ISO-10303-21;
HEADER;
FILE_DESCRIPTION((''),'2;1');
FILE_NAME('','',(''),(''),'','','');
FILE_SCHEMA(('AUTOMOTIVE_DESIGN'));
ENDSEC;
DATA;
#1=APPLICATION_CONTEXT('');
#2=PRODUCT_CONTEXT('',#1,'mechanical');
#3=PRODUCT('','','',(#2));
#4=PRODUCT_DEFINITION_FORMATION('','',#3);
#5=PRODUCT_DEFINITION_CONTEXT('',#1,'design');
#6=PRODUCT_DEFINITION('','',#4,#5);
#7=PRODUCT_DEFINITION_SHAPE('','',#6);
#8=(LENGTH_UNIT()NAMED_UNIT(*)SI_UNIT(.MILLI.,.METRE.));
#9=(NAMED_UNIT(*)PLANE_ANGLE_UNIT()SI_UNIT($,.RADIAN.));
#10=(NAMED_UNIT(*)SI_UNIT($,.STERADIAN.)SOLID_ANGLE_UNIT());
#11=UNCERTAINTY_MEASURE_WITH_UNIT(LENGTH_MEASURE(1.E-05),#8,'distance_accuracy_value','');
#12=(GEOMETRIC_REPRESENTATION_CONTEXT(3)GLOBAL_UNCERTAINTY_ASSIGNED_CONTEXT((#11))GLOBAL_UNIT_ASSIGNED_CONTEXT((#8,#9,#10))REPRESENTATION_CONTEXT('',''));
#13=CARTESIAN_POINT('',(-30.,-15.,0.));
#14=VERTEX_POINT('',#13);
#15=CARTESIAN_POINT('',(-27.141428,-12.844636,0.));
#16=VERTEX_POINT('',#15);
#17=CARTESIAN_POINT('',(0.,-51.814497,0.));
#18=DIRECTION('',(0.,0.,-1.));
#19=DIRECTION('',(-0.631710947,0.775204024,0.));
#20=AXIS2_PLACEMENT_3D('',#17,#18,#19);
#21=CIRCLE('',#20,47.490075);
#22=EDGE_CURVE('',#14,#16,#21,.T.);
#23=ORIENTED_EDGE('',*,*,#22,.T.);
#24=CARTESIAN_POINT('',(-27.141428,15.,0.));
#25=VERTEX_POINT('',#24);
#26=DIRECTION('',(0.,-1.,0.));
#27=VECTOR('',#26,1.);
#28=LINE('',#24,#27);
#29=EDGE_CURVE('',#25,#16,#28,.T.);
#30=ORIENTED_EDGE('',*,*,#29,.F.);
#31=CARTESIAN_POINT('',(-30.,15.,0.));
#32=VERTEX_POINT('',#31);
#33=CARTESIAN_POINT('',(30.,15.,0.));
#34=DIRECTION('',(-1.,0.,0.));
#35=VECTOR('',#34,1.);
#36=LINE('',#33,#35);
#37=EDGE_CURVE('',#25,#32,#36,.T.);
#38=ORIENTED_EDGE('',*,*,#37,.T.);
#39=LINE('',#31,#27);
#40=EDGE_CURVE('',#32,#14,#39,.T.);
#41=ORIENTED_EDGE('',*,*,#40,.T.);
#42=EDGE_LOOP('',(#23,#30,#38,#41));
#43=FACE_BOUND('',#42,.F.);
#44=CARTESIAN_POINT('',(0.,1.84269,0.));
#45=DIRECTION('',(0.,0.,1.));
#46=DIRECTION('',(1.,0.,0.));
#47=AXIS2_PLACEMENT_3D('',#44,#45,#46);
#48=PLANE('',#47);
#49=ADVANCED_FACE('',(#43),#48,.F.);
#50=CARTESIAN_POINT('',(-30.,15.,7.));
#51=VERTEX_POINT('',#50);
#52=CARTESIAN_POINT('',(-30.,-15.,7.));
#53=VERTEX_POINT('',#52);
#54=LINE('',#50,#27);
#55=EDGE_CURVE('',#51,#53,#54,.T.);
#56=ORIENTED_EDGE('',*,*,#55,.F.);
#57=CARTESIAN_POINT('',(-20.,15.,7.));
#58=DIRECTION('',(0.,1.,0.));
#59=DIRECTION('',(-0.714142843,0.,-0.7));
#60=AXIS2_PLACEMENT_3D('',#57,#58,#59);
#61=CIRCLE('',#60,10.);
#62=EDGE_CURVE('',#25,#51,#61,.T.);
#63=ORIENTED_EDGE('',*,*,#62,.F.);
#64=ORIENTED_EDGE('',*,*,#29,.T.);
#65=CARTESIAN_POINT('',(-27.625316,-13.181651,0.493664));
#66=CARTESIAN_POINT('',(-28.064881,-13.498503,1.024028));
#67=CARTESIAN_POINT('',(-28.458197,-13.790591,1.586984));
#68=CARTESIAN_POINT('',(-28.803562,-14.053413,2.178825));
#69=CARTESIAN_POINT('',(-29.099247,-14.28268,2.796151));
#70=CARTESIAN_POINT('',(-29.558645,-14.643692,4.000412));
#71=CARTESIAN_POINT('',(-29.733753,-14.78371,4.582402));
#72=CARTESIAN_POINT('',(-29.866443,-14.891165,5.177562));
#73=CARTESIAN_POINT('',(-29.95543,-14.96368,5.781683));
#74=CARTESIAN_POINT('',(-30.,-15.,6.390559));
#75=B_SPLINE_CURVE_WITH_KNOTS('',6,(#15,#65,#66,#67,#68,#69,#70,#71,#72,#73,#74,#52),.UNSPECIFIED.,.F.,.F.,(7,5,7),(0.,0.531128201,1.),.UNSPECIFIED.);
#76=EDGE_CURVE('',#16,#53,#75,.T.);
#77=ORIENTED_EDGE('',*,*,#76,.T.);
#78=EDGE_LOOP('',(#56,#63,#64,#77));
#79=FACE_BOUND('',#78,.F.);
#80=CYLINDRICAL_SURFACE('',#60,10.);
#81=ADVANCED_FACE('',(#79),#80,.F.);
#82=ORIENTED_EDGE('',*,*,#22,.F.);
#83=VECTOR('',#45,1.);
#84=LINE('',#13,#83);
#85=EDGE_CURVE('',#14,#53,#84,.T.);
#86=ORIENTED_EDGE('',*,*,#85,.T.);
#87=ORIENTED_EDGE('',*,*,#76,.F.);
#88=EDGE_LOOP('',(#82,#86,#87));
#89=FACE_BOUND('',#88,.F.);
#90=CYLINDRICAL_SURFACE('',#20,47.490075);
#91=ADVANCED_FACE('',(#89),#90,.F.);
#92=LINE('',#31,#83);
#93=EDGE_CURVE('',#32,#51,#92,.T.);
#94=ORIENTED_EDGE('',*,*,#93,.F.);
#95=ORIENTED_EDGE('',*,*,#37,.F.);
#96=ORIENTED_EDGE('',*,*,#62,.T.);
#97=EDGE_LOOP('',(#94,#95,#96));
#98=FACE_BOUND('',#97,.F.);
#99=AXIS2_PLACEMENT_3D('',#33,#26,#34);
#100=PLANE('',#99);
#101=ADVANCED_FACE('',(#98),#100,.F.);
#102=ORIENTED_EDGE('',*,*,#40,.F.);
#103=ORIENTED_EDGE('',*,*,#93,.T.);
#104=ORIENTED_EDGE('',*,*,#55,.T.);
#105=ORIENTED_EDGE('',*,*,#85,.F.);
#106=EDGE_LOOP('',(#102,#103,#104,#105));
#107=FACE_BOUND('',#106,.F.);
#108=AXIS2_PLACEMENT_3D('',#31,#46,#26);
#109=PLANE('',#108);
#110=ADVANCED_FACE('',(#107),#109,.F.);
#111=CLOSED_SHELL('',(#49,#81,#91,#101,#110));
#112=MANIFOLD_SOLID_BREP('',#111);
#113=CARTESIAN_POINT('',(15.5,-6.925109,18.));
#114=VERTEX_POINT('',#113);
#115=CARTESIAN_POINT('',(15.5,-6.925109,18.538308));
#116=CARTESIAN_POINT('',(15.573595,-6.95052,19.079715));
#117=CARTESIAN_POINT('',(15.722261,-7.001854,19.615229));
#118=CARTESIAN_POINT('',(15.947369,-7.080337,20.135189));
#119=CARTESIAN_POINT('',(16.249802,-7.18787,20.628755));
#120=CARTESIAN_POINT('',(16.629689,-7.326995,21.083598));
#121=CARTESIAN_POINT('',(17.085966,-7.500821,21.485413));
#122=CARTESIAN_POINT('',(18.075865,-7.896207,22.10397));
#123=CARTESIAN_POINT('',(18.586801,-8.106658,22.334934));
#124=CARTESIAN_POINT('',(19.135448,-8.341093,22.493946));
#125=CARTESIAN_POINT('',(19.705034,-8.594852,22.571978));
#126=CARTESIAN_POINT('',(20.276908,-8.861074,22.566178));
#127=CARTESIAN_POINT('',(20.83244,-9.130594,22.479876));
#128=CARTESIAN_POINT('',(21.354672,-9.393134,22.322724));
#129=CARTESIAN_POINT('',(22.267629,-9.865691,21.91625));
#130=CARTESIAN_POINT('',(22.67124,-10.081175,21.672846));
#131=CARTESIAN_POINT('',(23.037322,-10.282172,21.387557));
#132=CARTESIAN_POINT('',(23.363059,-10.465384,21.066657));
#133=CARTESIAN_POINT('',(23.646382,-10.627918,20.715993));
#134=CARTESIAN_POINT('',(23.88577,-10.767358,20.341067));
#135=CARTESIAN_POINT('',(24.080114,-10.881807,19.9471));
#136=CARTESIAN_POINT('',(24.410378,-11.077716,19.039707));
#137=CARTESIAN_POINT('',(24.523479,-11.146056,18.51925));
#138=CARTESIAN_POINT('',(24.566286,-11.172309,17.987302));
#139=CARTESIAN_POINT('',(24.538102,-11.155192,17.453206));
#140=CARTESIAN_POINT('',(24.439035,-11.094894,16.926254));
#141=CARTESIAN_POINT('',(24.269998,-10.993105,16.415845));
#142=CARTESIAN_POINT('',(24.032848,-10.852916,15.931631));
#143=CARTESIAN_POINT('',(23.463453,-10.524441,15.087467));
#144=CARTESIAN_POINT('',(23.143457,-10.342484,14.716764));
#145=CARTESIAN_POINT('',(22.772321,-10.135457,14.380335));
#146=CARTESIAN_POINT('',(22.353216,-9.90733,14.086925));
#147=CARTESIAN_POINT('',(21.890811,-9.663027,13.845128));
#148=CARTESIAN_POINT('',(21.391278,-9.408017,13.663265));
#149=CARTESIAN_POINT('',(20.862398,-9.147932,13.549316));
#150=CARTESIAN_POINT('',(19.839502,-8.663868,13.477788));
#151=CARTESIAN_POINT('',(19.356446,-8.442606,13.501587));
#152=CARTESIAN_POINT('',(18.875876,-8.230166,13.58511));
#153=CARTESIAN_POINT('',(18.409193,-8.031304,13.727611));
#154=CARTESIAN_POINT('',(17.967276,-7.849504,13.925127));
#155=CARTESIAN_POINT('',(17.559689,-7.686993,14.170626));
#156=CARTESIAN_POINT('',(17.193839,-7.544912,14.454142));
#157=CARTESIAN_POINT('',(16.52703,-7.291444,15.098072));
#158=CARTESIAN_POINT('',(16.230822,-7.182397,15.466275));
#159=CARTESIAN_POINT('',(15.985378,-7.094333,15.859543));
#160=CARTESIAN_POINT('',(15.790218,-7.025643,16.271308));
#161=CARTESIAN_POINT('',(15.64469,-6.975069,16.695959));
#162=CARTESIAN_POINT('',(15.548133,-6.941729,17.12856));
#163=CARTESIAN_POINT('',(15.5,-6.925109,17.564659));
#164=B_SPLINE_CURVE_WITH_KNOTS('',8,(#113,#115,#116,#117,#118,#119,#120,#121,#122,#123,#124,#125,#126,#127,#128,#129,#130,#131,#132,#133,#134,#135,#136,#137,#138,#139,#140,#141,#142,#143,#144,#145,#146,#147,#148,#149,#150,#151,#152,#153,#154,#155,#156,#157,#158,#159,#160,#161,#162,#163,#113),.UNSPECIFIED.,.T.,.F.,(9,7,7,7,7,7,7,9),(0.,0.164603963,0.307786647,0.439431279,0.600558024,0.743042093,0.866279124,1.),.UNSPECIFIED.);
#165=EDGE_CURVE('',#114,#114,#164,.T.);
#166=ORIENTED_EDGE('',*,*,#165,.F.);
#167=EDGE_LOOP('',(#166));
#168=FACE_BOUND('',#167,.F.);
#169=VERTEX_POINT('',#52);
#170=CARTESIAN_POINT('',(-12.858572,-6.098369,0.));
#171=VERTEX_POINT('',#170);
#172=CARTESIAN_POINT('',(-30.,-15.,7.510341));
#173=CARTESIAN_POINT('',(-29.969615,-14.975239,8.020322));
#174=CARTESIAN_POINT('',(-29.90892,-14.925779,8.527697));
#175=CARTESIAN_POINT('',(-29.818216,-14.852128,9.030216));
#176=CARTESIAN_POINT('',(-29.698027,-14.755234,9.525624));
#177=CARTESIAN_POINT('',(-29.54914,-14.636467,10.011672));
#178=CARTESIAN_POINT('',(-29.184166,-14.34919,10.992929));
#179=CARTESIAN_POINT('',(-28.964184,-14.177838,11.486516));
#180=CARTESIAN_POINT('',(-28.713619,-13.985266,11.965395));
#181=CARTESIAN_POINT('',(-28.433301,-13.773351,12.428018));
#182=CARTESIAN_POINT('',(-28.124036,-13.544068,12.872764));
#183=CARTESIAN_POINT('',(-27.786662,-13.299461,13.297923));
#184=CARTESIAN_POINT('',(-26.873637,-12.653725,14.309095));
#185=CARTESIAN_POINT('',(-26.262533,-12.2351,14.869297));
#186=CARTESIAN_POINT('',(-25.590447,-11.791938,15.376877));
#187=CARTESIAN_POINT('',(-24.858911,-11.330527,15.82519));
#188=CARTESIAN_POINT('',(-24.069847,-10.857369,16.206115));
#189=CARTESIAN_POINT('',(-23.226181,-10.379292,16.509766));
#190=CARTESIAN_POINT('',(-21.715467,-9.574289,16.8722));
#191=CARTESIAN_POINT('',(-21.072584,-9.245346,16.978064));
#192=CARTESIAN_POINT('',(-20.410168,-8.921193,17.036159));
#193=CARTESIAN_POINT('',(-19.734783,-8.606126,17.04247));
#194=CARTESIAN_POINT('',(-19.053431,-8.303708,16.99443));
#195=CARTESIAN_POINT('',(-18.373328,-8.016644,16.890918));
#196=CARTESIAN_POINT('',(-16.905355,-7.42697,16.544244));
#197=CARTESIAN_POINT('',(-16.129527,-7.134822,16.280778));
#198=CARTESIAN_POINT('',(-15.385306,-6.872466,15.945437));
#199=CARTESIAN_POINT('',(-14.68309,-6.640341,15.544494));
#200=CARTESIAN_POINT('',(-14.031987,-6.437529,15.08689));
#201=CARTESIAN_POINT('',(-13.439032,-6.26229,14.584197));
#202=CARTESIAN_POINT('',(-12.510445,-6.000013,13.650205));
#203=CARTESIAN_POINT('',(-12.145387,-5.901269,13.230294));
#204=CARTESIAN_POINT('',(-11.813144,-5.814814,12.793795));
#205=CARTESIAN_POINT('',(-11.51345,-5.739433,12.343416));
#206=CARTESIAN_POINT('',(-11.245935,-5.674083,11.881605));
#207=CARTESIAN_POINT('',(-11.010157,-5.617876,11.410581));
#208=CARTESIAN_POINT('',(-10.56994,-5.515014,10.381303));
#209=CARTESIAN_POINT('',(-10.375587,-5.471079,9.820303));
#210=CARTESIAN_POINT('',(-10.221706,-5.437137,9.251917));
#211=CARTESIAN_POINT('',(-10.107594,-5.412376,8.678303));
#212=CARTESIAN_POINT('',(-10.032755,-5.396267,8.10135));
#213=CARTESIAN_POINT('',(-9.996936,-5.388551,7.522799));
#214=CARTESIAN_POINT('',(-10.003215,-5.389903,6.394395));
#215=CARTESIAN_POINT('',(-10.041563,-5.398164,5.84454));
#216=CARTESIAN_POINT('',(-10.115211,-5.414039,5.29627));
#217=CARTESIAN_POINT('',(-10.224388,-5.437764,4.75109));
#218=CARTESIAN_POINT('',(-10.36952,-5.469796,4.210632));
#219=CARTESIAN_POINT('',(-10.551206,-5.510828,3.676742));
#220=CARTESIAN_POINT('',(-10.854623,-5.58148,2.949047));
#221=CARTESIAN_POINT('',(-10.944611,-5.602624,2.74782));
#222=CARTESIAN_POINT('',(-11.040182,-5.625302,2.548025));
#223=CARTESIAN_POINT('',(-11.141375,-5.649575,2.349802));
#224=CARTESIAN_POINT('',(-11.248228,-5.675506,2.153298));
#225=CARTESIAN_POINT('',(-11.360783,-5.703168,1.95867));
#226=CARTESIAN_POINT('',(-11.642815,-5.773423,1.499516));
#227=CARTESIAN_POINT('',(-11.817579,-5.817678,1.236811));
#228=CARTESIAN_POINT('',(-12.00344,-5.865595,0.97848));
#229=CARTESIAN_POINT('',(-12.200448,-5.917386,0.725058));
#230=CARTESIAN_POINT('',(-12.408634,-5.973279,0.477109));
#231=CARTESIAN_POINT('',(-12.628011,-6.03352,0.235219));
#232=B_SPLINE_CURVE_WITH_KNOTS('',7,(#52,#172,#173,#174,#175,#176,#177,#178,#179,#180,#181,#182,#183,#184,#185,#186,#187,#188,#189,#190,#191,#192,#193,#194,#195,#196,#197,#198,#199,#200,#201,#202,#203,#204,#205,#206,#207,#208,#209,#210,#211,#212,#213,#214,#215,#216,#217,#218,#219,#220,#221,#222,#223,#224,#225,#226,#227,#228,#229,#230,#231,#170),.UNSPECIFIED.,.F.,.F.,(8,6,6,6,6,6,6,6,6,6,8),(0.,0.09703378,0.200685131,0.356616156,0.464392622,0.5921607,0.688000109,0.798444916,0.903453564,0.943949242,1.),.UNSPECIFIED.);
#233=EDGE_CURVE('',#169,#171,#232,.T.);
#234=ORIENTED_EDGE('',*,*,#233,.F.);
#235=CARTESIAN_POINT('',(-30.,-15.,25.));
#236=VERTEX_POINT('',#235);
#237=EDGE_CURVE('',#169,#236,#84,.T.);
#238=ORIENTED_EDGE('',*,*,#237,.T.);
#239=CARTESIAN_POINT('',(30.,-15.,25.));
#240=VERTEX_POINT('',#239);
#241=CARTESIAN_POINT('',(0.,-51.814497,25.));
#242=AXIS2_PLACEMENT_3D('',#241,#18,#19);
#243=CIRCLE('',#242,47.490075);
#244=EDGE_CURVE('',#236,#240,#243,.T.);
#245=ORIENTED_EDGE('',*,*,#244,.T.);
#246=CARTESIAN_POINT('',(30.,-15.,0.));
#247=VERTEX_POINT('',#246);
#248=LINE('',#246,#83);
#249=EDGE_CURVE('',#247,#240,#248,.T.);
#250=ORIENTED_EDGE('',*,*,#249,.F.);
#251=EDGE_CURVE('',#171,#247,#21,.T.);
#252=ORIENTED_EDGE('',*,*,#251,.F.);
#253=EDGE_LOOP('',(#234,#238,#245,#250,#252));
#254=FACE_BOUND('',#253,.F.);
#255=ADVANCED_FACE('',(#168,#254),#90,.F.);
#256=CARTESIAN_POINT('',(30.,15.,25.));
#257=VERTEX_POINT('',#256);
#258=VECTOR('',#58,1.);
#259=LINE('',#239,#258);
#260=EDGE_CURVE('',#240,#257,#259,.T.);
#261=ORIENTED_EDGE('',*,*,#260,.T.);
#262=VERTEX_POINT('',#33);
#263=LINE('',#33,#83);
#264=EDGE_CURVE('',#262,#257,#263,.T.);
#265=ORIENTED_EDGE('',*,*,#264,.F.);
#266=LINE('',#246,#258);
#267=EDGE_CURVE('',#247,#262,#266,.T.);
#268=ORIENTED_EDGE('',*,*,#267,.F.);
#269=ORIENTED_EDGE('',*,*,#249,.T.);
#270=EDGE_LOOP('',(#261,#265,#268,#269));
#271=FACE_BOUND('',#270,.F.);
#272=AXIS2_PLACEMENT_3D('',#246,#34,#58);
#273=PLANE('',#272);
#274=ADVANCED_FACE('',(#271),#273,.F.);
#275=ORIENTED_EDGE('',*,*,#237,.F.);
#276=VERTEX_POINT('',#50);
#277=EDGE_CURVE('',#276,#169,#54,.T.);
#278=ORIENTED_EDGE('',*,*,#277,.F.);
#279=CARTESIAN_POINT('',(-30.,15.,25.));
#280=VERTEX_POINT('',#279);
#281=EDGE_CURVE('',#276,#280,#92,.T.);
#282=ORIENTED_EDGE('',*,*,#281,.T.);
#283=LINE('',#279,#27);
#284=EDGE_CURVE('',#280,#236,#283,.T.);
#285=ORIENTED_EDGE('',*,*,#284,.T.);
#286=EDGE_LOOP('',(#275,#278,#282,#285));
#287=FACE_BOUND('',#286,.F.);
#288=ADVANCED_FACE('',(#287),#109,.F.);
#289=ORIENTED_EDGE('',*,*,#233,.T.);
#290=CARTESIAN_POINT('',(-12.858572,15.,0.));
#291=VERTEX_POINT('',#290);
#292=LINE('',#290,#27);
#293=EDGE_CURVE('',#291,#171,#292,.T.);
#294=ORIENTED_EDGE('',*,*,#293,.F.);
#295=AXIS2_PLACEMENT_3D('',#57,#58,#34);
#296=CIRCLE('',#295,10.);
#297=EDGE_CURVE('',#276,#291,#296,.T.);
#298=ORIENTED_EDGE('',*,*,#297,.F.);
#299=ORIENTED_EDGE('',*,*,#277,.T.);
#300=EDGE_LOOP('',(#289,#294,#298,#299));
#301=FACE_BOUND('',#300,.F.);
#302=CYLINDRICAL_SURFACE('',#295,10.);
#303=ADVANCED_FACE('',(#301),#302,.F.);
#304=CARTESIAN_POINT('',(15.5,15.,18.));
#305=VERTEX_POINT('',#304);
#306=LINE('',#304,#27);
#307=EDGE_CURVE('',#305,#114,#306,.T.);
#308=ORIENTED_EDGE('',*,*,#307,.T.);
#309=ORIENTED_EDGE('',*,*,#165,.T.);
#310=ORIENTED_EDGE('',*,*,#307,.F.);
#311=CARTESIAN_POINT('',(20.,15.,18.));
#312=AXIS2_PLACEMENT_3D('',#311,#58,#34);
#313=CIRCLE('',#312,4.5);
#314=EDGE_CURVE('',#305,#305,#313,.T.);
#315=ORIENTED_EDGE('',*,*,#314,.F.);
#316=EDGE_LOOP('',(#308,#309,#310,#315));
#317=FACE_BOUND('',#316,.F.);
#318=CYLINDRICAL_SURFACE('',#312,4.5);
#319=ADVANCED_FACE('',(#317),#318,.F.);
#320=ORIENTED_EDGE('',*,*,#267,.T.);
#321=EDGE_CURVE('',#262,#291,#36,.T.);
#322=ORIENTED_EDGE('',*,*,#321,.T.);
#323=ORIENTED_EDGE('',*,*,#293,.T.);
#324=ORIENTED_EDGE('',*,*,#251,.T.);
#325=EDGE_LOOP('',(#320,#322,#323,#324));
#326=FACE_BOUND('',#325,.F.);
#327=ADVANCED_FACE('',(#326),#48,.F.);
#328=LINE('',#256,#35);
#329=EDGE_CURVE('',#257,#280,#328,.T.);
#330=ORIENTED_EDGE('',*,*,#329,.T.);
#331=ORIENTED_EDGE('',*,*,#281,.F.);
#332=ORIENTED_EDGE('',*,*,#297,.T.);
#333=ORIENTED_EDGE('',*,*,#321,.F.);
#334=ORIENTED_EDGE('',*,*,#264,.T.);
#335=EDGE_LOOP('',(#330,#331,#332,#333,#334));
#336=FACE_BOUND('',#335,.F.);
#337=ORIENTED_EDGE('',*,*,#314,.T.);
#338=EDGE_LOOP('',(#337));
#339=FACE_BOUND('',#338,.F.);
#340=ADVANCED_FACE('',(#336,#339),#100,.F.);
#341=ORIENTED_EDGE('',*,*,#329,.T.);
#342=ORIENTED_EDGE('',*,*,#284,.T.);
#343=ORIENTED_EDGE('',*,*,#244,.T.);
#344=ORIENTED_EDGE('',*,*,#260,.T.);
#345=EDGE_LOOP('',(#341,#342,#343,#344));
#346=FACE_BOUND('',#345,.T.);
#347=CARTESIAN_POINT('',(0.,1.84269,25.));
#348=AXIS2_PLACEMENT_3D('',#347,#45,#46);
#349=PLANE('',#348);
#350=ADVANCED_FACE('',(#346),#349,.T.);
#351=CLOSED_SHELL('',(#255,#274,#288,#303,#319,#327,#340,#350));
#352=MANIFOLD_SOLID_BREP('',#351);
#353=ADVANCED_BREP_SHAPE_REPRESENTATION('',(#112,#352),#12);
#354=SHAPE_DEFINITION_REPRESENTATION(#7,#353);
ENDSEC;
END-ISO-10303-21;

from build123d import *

# Parameters (mm, degrees)
F1_DEPTH = 25
F2_R     = 4.5
F3_REACH = 56.2498094968


with BuildPart() as f1:
    # F0 (on Top) → F1 (new body)
    with BuildSketch(Plane.XY):
        with BuildLine():
            Line((30, 15), (-30, 15))
            Line((-30, 15), (-30, -15))
            ThreePointArc((-30, -15), (0, -4.3244223472), (30, -15))
            Line((30, -15), (30, 15))
        make_face()
    extrude(amount=F1_DEPTH)

    f3_end = f1.faces().sort_by_distance((0, -4.3244223472, 12.5))[0]
    # F2 (on face) → F3 (cut, up to a face of the model that its end follows)
    with BuildSketch(Plane(origin=(0, 15, 0), x_dir=(-1, 0, 0), z_dir=(0, 1, 0))):
        with BuildLine():
            ThreePointArc((27.1414284285, 0), (29.2578151927, 3.2194103823), (30, 7))
            ThreePointArc((30, 7), (16.2194103823, 16.2578151927), (12.8585715715, 0))
            Line((12.8585715715, 0), (27.1414284285, 0))
        make_face()
        with Locations((-20, 18)):
            Circle(F2_R)
    f3_long = extrude(amount=-F3_REACH, mode=Mode.PRIVATE)
    add(split(f3_long, bisect_by=f3_end, keep=Keep.BOTTOM, mode=Mode.PRIVATE), mode=Mode.SUBTRACT)


solid = f1.part
